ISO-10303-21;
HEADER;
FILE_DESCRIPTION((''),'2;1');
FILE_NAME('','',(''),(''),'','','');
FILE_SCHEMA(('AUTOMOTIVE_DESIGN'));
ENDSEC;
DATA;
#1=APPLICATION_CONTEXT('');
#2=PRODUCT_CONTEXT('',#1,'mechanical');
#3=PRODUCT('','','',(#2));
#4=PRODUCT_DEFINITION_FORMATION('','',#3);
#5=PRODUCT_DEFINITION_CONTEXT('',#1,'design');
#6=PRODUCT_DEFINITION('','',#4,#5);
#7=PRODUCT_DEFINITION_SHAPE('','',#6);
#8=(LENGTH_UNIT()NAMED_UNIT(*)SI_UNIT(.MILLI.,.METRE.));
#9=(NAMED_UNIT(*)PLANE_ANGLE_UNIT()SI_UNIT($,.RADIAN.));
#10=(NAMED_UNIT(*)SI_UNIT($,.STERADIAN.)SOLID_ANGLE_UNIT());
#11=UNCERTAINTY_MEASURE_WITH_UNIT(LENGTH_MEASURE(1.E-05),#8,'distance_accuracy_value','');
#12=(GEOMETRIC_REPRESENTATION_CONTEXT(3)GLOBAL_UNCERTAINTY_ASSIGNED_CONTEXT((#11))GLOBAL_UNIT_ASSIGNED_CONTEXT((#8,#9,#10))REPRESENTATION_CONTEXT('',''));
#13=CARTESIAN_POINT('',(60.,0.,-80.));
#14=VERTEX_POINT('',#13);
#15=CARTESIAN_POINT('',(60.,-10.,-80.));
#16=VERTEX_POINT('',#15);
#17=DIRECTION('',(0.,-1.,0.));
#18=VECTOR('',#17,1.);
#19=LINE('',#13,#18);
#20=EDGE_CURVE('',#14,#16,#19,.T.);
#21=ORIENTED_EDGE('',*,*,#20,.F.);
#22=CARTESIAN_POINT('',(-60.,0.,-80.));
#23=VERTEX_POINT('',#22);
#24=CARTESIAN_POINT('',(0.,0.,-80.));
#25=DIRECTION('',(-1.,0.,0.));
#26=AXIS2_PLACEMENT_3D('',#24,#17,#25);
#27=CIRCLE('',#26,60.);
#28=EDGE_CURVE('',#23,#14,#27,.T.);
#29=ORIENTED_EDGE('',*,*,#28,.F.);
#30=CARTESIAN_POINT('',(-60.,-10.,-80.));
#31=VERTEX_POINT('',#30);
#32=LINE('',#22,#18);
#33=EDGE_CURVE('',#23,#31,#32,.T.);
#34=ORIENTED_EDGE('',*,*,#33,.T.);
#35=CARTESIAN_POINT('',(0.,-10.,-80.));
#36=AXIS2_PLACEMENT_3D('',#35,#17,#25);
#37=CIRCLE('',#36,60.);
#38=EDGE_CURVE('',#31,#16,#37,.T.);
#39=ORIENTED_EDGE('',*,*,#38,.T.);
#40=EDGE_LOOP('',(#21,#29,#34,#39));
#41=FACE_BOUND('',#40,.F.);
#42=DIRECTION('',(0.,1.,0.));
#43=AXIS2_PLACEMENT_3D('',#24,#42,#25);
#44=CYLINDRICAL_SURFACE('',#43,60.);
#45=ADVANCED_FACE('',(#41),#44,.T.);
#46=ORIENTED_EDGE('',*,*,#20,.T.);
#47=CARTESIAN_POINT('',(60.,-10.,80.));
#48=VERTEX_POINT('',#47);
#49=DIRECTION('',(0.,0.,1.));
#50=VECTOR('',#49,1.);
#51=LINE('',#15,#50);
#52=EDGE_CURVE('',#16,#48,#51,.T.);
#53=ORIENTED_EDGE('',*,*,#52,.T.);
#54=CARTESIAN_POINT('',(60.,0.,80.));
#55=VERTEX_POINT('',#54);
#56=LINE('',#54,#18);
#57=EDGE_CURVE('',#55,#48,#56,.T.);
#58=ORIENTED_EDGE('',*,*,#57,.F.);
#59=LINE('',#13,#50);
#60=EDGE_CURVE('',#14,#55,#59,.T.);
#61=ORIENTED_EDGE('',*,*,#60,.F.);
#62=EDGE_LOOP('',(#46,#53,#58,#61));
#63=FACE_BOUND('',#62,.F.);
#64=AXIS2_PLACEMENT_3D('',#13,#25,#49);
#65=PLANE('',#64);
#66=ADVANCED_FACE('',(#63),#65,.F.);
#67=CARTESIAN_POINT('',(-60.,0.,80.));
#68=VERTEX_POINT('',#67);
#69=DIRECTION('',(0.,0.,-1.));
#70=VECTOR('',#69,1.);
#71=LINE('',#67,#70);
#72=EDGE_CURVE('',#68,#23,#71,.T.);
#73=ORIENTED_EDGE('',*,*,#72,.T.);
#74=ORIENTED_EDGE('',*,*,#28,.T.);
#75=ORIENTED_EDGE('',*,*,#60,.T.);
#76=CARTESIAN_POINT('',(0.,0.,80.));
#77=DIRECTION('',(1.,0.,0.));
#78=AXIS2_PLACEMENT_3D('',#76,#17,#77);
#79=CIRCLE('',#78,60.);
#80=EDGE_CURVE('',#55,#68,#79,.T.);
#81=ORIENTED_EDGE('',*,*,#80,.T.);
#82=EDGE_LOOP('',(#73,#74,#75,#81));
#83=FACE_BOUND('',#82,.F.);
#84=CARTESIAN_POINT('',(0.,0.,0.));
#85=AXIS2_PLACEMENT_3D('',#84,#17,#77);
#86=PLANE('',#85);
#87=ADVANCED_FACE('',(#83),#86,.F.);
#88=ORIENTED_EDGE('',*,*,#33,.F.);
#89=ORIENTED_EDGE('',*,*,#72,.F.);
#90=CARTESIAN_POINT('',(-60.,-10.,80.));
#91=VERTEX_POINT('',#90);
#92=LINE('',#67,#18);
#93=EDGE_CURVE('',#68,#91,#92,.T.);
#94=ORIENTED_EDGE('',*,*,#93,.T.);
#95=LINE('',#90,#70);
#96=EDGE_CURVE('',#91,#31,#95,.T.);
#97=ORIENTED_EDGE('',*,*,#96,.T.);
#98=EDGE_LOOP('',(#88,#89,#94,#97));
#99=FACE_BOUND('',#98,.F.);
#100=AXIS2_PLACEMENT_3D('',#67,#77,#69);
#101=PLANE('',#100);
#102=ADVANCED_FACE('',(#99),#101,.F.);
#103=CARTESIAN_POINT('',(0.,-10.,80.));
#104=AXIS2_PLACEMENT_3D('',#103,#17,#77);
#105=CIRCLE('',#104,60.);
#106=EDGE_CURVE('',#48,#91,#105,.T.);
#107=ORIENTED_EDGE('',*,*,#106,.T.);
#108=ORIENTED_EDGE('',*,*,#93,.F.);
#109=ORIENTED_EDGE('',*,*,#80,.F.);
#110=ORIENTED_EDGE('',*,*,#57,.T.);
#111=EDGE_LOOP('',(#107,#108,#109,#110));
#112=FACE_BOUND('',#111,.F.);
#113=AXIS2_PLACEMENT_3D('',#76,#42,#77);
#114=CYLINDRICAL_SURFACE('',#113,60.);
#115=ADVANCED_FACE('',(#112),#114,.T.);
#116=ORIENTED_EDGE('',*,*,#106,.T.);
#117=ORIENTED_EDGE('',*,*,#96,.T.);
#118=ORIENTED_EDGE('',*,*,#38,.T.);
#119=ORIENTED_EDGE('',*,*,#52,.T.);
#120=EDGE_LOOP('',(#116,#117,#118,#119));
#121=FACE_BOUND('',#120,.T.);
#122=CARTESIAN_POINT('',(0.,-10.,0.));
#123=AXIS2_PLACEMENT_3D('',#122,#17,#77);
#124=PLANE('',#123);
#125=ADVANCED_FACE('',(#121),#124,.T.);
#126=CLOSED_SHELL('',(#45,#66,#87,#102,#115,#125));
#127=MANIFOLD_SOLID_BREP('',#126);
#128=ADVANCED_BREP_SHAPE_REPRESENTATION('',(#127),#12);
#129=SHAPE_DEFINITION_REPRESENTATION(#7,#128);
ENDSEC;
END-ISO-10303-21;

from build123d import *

# Parameters (mm, degrees)
F1_DEPTH = 10


# Not quite as in the source:
# - a feature of the source that left no trace in its solid (it failed there, or was rolled back) is left out


with BuildPart() as f1:
    # F0 (on Front) → F1 (new body)
    with BuildSketch(Plane.XZ):
        with BuildLine():
            ThreePointArc((-60, -80), (0, -140), (60, -80))
            Line((60, -80), (60, 80))
            ThreePointArc((60, 80), (0, 140), (-60, 80))
            Line((-60, 80), (-60, -80))
        make_face()
    extrude(amount=F1_DEPTH)


solid = f1.part
